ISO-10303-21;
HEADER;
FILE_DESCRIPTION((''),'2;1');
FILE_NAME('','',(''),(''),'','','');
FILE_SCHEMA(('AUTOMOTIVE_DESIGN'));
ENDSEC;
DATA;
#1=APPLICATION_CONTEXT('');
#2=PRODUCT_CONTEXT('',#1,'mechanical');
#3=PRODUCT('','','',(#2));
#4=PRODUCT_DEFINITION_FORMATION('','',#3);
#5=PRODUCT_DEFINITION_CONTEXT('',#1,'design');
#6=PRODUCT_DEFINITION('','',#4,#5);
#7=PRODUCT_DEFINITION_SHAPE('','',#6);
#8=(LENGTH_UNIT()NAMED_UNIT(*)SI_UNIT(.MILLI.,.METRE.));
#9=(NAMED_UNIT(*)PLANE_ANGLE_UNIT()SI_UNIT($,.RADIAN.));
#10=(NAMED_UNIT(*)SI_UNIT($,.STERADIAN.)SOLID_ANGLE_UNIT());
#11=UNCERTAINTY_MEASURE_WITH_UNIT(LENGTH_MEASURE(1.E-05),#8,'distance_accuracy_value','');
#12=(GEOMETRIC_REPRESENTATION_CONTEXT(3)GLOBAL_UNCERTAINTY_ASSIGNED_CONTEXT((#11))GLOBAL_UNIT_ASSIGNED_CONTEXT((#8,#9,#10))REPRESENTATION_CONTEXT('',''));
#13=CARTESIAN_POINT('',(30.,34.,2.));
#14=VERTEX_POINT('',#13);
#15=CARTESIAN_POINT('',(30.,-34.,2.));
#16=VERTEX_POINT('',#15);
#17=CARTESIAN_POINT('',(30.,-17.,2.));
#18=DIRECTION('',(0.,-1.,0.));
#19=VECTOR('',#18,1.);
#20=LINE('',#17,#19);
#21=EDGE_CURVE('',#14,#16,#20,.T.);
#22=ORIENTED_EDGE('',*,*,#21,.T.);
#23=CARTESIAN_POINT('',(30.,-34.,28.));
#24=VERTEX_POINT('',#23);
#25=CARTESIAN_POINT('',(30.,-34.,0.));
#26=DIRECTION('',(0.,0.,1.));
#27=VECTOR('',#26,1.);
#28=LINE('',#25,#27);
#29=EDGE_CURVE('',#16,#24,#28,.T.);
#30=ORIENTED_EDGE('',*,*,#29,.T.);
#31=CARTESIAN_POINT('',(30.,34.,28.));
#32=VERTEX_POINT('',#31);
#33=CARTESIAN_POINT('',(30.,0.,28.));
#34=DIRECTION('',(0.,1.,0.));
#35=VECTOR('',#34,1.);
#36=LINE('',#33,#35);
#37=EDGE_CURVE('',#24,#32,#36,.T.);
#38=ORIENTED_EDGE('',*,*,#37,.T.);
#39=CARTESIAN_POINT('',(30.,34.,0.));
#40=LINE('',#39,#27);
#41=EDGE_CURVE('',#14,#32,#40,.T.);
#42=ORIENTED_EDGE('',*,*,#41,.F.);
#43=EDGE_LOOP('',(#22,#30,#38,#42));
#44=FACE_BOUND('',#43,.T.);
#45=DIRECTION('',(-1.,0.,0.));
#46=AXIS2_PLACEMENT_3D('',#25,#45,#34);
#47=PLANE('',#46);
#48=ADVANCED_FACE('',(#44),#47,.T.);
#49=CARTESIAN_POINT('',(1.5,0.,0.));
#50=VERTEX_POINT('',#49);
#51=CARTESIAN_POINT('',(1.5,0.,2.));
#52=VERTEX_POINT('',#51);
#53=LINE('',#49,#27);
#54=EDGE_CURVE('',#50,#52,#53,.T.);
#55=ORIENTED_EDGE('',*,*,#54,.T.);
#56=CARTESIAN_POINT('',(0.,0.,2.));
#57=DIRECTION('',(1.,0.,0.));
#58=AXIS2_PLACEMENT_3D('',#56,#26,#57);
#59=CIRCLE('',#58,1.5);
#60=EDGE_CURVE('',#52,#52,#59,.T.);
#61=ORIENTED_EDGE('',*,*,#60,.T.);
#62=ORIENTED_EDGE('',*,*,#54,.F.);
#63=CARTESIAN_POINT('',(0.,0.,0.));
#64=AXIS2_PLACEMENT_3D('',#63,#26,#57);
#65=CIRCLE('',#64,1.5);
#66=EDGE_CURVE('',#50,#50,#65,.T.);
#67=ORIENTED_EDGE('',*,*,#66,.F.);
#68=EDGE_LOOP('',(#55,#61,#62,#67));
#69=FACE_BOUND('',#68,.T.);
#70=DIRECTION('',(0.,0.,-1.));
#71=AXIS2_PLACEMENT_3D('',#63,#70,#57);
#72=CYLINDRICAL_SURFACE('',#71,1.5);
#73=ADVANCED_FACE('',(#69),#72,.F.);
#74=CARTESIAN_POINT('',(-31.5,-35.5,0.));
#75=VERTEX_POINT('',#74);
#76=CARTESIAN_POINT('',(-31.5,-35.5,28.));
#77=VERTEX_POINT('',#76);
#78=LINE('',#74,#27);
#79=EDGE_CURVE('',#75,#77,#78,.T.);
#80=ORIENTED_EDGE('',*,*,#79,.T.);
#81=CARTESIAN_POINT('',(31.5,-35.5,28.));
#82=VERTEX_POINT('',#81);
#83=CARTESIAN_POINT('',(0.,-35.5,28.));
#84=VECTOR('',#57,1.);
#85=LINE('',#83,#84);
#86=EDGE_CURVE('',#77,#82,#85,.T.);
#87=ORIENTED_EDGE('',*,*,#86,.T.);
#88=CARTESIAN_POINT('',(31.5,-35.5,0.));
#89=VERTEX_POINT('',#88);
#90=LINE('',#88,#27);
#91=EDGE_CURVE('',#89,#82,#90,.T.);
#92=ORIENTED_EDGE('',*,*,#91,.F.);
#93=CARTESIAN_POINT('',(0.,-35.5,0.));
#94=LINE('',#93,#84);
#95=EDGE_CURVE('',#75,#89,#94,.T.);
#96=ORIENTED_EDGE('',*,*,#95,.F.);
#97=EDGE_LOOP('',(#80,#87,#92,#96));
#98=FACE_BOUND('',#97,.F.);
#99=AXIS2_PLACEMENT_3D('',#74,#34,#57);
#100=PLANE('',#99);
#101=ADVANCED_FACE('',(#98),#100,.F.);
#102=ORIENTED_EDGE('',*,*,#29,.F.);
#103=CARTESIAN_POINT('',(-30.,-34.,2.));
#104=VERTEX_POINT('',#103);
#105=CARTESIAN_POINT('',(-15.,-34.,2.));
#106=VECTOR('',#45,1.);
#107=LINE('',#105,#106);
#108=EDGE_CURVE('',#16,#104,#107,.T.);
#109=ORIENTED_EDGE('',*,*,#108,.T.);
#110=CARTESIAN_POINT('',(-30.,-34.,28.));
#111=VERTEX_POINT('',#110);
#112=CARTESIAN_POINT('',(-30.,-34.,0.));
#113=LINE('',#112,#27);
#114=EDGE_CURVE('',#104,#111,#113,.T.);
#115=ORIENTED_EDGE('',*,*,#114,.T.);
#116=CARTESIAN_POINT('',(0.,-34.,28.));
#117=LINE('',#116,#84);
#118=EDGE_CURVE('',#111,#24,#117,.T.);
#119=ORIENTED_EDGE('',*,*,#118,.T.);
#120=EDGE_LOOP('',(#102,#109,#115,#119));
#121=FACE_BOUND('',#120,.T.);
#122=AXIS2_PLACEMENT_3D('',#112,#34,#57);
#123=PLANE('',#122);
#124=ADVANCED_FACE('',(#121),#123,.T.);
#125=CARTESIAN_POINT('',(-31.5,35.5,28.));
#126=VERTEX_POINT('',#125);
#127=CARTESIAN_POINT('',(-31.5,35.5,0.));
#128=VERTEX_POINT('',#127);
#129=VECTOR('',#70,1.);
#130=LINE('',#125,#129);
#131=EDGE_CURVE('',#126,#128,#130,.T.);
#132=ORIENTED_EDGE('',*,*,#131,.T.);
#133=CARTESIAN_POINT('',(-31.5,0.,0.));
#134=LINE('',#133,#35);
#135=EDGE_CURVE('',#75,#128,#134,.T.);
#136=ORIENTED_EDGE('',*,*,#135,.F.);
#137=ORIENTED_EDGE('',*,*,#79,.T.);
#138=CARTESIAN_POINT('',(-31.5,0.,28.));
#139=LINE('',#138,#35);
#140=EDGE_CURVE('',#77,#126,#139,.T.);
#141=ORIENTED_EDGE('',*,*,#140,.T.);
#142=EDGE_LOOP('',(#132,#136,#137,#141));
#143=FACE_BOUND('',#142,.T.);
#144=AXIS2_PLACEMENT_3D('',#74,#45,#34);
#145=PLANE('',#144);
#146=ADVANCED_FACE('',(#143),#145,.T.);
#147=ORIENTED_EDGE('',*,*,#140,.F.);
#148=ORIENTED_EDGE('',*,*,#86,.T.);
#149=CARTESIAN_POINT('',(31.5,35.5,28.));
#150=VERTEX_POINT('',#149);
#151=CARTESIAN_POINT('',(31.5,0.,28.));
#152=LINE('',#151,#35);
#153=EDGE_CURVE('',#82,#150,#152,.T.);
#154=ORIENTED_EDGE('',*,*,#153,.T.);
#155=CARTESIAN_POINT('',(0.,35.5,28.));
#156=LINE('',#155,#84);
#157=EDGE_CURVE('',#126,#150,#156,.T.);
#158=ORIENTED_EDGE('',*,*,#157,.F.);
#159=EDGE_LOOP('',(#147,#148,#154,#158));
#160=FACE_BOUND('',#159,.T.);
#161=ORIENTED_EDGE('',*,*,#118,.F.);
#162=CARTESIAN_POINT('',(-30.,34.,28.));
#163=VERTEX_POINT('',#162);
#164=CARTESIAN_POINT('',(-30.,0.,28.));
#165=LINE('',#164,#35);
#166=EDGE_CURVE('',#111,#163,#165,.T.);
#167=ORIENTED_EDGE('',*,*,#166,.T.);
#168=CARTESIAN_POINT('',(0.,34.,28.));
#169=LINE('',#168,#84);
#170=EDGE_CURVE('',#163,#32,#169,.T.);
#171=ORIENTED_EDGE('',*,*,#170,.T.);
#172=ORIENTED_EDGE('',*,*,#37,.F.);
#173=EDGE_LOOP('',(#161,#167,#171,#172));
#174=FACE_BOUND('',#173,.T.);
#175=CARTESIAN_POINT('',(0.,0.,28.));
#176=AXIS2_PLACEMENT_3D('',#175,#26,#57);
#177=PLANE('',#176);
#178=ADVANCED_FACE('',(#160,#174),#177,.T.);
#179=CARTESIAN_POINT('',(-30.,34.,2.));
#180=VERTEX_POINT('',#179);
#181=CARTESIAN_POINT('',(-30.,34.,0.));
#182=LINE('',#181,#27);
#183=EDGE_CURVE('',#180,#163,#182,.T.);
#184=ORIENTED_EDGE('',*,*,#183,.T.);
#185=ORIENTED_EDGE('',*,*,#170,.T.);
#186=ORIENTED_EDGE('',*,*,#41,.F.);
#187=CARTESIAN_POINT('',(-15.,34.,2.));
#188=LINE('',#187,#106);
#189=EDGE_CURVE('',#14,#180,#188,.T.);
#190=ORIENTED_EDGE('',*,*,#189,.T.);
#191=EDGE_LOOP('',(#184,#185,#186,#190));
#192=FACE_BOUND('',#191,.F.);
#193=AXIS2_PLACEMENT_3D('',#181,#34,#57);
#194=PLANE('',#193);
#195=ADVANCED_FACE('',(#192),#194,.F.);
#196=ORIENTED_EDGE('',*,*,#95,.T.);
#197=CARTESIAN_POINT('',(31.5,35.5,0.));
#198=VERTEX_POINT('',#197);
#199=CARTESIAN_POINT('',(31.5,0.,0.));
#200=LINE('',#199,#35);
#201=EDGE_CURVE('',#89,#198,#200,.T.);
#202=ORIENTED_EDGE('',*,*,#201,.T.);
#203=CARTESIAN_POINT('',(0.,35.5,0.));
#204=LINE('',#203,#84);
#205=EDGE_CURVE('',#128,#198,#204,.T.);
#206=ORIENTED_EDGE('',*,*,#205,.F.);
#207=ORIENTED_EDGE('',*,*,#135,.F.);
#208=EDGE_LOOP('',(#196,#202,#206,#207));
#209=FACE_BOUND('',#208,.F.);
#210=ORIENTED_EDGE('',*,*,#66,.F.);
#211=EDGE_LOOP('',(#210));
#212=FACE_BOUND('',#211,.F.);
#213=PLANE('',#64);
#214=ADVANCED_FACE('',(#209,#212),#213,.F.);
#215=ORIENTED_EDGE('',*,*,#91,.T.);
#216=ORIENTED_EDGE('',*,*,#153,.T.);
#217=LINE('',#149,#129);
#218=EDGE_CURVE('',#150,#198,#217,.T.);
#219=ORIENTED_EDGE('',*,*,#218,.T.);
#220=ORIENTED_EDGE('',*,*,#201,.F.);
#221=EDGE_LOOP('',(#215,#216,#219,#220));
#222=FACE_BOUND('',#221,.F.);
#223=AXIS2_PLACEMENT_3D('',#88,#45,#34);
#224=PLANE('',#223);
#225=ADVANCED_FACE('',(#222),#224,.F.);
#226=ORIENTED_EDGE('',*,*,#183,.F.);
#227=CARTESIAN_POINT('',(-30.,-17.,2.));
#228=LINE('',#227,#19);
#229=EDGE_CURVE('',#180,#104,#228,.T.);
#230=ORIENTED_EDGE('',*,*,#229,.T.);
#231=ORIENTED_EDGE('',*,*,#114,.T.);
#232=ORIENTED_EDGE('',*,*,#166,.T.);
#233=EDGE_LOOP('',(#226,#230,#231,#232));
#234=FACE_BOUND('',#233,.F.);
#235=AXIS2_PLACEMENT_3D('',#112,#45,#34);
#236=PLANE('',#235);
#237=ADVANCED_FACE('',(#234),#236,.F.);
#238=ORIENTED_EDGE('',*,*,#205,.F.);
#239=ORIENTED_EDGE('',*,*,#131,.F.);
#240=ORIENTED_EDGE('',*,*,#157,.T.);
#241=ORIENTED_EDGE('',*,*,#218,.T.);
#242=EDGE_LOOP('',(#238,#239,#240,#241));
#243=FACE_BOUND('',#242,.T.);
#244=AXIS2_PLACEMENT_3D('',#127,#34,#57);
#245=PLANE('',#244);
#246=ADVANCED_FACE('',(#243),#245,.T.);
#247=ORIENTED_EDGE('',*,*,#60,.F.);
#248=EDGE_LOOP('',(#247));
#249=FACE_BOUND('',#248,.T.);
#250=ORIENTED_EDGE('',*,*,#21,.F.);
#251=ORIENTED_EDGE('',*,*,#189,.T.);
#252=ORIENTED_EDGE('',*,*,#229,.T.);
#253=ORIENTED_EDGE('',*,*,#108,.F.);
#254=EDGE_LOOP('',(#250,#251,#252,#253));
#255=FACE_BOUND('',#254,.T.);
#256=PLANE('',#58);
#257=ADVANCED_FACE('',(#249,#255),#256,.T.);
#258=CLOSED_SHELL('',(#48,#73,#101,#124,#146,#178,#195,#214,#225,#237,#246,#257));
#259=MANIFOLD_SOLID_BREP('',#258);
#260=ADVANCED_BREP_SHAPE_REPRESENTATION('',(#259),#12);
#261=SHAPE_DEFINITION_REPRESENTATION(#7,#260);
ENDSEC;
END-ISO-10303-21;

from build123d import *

# Parameters (mm, degrees)
F0_W     = 63
F0_H     = 71
F0_W_2   = 60
F0_H_2   = 68
F0_R     = 1.5
F1_DEPTH = 2
F2_DEPTH = 28


with BuildPart() as f1:
    # F0 (on Top) → F1 (new body)
    with BuildSketch(Plane.XY):
        Rectangle(F0_W, F0_H)
        Rectangle(F0_W_2, F0_H_2, mode=Mode.SUBTRACT)
        Rectangle(F0_W_2, F0_H_2)
        Circle(F0_R, mode=Mode.SUBTRACT)
    extrude(amount=F1_DEPTH)

    # F0 (on Top) → F2 (join)
    with BuildSketch(Plane.XY):
        Rectangle(F0_W, F0_H)
        Rectangle(F0_W_2, F0_H_2, mode=Mode.SUBTRACT)
    extrude(amount=F2_DEPTH)


solid = f1.part
